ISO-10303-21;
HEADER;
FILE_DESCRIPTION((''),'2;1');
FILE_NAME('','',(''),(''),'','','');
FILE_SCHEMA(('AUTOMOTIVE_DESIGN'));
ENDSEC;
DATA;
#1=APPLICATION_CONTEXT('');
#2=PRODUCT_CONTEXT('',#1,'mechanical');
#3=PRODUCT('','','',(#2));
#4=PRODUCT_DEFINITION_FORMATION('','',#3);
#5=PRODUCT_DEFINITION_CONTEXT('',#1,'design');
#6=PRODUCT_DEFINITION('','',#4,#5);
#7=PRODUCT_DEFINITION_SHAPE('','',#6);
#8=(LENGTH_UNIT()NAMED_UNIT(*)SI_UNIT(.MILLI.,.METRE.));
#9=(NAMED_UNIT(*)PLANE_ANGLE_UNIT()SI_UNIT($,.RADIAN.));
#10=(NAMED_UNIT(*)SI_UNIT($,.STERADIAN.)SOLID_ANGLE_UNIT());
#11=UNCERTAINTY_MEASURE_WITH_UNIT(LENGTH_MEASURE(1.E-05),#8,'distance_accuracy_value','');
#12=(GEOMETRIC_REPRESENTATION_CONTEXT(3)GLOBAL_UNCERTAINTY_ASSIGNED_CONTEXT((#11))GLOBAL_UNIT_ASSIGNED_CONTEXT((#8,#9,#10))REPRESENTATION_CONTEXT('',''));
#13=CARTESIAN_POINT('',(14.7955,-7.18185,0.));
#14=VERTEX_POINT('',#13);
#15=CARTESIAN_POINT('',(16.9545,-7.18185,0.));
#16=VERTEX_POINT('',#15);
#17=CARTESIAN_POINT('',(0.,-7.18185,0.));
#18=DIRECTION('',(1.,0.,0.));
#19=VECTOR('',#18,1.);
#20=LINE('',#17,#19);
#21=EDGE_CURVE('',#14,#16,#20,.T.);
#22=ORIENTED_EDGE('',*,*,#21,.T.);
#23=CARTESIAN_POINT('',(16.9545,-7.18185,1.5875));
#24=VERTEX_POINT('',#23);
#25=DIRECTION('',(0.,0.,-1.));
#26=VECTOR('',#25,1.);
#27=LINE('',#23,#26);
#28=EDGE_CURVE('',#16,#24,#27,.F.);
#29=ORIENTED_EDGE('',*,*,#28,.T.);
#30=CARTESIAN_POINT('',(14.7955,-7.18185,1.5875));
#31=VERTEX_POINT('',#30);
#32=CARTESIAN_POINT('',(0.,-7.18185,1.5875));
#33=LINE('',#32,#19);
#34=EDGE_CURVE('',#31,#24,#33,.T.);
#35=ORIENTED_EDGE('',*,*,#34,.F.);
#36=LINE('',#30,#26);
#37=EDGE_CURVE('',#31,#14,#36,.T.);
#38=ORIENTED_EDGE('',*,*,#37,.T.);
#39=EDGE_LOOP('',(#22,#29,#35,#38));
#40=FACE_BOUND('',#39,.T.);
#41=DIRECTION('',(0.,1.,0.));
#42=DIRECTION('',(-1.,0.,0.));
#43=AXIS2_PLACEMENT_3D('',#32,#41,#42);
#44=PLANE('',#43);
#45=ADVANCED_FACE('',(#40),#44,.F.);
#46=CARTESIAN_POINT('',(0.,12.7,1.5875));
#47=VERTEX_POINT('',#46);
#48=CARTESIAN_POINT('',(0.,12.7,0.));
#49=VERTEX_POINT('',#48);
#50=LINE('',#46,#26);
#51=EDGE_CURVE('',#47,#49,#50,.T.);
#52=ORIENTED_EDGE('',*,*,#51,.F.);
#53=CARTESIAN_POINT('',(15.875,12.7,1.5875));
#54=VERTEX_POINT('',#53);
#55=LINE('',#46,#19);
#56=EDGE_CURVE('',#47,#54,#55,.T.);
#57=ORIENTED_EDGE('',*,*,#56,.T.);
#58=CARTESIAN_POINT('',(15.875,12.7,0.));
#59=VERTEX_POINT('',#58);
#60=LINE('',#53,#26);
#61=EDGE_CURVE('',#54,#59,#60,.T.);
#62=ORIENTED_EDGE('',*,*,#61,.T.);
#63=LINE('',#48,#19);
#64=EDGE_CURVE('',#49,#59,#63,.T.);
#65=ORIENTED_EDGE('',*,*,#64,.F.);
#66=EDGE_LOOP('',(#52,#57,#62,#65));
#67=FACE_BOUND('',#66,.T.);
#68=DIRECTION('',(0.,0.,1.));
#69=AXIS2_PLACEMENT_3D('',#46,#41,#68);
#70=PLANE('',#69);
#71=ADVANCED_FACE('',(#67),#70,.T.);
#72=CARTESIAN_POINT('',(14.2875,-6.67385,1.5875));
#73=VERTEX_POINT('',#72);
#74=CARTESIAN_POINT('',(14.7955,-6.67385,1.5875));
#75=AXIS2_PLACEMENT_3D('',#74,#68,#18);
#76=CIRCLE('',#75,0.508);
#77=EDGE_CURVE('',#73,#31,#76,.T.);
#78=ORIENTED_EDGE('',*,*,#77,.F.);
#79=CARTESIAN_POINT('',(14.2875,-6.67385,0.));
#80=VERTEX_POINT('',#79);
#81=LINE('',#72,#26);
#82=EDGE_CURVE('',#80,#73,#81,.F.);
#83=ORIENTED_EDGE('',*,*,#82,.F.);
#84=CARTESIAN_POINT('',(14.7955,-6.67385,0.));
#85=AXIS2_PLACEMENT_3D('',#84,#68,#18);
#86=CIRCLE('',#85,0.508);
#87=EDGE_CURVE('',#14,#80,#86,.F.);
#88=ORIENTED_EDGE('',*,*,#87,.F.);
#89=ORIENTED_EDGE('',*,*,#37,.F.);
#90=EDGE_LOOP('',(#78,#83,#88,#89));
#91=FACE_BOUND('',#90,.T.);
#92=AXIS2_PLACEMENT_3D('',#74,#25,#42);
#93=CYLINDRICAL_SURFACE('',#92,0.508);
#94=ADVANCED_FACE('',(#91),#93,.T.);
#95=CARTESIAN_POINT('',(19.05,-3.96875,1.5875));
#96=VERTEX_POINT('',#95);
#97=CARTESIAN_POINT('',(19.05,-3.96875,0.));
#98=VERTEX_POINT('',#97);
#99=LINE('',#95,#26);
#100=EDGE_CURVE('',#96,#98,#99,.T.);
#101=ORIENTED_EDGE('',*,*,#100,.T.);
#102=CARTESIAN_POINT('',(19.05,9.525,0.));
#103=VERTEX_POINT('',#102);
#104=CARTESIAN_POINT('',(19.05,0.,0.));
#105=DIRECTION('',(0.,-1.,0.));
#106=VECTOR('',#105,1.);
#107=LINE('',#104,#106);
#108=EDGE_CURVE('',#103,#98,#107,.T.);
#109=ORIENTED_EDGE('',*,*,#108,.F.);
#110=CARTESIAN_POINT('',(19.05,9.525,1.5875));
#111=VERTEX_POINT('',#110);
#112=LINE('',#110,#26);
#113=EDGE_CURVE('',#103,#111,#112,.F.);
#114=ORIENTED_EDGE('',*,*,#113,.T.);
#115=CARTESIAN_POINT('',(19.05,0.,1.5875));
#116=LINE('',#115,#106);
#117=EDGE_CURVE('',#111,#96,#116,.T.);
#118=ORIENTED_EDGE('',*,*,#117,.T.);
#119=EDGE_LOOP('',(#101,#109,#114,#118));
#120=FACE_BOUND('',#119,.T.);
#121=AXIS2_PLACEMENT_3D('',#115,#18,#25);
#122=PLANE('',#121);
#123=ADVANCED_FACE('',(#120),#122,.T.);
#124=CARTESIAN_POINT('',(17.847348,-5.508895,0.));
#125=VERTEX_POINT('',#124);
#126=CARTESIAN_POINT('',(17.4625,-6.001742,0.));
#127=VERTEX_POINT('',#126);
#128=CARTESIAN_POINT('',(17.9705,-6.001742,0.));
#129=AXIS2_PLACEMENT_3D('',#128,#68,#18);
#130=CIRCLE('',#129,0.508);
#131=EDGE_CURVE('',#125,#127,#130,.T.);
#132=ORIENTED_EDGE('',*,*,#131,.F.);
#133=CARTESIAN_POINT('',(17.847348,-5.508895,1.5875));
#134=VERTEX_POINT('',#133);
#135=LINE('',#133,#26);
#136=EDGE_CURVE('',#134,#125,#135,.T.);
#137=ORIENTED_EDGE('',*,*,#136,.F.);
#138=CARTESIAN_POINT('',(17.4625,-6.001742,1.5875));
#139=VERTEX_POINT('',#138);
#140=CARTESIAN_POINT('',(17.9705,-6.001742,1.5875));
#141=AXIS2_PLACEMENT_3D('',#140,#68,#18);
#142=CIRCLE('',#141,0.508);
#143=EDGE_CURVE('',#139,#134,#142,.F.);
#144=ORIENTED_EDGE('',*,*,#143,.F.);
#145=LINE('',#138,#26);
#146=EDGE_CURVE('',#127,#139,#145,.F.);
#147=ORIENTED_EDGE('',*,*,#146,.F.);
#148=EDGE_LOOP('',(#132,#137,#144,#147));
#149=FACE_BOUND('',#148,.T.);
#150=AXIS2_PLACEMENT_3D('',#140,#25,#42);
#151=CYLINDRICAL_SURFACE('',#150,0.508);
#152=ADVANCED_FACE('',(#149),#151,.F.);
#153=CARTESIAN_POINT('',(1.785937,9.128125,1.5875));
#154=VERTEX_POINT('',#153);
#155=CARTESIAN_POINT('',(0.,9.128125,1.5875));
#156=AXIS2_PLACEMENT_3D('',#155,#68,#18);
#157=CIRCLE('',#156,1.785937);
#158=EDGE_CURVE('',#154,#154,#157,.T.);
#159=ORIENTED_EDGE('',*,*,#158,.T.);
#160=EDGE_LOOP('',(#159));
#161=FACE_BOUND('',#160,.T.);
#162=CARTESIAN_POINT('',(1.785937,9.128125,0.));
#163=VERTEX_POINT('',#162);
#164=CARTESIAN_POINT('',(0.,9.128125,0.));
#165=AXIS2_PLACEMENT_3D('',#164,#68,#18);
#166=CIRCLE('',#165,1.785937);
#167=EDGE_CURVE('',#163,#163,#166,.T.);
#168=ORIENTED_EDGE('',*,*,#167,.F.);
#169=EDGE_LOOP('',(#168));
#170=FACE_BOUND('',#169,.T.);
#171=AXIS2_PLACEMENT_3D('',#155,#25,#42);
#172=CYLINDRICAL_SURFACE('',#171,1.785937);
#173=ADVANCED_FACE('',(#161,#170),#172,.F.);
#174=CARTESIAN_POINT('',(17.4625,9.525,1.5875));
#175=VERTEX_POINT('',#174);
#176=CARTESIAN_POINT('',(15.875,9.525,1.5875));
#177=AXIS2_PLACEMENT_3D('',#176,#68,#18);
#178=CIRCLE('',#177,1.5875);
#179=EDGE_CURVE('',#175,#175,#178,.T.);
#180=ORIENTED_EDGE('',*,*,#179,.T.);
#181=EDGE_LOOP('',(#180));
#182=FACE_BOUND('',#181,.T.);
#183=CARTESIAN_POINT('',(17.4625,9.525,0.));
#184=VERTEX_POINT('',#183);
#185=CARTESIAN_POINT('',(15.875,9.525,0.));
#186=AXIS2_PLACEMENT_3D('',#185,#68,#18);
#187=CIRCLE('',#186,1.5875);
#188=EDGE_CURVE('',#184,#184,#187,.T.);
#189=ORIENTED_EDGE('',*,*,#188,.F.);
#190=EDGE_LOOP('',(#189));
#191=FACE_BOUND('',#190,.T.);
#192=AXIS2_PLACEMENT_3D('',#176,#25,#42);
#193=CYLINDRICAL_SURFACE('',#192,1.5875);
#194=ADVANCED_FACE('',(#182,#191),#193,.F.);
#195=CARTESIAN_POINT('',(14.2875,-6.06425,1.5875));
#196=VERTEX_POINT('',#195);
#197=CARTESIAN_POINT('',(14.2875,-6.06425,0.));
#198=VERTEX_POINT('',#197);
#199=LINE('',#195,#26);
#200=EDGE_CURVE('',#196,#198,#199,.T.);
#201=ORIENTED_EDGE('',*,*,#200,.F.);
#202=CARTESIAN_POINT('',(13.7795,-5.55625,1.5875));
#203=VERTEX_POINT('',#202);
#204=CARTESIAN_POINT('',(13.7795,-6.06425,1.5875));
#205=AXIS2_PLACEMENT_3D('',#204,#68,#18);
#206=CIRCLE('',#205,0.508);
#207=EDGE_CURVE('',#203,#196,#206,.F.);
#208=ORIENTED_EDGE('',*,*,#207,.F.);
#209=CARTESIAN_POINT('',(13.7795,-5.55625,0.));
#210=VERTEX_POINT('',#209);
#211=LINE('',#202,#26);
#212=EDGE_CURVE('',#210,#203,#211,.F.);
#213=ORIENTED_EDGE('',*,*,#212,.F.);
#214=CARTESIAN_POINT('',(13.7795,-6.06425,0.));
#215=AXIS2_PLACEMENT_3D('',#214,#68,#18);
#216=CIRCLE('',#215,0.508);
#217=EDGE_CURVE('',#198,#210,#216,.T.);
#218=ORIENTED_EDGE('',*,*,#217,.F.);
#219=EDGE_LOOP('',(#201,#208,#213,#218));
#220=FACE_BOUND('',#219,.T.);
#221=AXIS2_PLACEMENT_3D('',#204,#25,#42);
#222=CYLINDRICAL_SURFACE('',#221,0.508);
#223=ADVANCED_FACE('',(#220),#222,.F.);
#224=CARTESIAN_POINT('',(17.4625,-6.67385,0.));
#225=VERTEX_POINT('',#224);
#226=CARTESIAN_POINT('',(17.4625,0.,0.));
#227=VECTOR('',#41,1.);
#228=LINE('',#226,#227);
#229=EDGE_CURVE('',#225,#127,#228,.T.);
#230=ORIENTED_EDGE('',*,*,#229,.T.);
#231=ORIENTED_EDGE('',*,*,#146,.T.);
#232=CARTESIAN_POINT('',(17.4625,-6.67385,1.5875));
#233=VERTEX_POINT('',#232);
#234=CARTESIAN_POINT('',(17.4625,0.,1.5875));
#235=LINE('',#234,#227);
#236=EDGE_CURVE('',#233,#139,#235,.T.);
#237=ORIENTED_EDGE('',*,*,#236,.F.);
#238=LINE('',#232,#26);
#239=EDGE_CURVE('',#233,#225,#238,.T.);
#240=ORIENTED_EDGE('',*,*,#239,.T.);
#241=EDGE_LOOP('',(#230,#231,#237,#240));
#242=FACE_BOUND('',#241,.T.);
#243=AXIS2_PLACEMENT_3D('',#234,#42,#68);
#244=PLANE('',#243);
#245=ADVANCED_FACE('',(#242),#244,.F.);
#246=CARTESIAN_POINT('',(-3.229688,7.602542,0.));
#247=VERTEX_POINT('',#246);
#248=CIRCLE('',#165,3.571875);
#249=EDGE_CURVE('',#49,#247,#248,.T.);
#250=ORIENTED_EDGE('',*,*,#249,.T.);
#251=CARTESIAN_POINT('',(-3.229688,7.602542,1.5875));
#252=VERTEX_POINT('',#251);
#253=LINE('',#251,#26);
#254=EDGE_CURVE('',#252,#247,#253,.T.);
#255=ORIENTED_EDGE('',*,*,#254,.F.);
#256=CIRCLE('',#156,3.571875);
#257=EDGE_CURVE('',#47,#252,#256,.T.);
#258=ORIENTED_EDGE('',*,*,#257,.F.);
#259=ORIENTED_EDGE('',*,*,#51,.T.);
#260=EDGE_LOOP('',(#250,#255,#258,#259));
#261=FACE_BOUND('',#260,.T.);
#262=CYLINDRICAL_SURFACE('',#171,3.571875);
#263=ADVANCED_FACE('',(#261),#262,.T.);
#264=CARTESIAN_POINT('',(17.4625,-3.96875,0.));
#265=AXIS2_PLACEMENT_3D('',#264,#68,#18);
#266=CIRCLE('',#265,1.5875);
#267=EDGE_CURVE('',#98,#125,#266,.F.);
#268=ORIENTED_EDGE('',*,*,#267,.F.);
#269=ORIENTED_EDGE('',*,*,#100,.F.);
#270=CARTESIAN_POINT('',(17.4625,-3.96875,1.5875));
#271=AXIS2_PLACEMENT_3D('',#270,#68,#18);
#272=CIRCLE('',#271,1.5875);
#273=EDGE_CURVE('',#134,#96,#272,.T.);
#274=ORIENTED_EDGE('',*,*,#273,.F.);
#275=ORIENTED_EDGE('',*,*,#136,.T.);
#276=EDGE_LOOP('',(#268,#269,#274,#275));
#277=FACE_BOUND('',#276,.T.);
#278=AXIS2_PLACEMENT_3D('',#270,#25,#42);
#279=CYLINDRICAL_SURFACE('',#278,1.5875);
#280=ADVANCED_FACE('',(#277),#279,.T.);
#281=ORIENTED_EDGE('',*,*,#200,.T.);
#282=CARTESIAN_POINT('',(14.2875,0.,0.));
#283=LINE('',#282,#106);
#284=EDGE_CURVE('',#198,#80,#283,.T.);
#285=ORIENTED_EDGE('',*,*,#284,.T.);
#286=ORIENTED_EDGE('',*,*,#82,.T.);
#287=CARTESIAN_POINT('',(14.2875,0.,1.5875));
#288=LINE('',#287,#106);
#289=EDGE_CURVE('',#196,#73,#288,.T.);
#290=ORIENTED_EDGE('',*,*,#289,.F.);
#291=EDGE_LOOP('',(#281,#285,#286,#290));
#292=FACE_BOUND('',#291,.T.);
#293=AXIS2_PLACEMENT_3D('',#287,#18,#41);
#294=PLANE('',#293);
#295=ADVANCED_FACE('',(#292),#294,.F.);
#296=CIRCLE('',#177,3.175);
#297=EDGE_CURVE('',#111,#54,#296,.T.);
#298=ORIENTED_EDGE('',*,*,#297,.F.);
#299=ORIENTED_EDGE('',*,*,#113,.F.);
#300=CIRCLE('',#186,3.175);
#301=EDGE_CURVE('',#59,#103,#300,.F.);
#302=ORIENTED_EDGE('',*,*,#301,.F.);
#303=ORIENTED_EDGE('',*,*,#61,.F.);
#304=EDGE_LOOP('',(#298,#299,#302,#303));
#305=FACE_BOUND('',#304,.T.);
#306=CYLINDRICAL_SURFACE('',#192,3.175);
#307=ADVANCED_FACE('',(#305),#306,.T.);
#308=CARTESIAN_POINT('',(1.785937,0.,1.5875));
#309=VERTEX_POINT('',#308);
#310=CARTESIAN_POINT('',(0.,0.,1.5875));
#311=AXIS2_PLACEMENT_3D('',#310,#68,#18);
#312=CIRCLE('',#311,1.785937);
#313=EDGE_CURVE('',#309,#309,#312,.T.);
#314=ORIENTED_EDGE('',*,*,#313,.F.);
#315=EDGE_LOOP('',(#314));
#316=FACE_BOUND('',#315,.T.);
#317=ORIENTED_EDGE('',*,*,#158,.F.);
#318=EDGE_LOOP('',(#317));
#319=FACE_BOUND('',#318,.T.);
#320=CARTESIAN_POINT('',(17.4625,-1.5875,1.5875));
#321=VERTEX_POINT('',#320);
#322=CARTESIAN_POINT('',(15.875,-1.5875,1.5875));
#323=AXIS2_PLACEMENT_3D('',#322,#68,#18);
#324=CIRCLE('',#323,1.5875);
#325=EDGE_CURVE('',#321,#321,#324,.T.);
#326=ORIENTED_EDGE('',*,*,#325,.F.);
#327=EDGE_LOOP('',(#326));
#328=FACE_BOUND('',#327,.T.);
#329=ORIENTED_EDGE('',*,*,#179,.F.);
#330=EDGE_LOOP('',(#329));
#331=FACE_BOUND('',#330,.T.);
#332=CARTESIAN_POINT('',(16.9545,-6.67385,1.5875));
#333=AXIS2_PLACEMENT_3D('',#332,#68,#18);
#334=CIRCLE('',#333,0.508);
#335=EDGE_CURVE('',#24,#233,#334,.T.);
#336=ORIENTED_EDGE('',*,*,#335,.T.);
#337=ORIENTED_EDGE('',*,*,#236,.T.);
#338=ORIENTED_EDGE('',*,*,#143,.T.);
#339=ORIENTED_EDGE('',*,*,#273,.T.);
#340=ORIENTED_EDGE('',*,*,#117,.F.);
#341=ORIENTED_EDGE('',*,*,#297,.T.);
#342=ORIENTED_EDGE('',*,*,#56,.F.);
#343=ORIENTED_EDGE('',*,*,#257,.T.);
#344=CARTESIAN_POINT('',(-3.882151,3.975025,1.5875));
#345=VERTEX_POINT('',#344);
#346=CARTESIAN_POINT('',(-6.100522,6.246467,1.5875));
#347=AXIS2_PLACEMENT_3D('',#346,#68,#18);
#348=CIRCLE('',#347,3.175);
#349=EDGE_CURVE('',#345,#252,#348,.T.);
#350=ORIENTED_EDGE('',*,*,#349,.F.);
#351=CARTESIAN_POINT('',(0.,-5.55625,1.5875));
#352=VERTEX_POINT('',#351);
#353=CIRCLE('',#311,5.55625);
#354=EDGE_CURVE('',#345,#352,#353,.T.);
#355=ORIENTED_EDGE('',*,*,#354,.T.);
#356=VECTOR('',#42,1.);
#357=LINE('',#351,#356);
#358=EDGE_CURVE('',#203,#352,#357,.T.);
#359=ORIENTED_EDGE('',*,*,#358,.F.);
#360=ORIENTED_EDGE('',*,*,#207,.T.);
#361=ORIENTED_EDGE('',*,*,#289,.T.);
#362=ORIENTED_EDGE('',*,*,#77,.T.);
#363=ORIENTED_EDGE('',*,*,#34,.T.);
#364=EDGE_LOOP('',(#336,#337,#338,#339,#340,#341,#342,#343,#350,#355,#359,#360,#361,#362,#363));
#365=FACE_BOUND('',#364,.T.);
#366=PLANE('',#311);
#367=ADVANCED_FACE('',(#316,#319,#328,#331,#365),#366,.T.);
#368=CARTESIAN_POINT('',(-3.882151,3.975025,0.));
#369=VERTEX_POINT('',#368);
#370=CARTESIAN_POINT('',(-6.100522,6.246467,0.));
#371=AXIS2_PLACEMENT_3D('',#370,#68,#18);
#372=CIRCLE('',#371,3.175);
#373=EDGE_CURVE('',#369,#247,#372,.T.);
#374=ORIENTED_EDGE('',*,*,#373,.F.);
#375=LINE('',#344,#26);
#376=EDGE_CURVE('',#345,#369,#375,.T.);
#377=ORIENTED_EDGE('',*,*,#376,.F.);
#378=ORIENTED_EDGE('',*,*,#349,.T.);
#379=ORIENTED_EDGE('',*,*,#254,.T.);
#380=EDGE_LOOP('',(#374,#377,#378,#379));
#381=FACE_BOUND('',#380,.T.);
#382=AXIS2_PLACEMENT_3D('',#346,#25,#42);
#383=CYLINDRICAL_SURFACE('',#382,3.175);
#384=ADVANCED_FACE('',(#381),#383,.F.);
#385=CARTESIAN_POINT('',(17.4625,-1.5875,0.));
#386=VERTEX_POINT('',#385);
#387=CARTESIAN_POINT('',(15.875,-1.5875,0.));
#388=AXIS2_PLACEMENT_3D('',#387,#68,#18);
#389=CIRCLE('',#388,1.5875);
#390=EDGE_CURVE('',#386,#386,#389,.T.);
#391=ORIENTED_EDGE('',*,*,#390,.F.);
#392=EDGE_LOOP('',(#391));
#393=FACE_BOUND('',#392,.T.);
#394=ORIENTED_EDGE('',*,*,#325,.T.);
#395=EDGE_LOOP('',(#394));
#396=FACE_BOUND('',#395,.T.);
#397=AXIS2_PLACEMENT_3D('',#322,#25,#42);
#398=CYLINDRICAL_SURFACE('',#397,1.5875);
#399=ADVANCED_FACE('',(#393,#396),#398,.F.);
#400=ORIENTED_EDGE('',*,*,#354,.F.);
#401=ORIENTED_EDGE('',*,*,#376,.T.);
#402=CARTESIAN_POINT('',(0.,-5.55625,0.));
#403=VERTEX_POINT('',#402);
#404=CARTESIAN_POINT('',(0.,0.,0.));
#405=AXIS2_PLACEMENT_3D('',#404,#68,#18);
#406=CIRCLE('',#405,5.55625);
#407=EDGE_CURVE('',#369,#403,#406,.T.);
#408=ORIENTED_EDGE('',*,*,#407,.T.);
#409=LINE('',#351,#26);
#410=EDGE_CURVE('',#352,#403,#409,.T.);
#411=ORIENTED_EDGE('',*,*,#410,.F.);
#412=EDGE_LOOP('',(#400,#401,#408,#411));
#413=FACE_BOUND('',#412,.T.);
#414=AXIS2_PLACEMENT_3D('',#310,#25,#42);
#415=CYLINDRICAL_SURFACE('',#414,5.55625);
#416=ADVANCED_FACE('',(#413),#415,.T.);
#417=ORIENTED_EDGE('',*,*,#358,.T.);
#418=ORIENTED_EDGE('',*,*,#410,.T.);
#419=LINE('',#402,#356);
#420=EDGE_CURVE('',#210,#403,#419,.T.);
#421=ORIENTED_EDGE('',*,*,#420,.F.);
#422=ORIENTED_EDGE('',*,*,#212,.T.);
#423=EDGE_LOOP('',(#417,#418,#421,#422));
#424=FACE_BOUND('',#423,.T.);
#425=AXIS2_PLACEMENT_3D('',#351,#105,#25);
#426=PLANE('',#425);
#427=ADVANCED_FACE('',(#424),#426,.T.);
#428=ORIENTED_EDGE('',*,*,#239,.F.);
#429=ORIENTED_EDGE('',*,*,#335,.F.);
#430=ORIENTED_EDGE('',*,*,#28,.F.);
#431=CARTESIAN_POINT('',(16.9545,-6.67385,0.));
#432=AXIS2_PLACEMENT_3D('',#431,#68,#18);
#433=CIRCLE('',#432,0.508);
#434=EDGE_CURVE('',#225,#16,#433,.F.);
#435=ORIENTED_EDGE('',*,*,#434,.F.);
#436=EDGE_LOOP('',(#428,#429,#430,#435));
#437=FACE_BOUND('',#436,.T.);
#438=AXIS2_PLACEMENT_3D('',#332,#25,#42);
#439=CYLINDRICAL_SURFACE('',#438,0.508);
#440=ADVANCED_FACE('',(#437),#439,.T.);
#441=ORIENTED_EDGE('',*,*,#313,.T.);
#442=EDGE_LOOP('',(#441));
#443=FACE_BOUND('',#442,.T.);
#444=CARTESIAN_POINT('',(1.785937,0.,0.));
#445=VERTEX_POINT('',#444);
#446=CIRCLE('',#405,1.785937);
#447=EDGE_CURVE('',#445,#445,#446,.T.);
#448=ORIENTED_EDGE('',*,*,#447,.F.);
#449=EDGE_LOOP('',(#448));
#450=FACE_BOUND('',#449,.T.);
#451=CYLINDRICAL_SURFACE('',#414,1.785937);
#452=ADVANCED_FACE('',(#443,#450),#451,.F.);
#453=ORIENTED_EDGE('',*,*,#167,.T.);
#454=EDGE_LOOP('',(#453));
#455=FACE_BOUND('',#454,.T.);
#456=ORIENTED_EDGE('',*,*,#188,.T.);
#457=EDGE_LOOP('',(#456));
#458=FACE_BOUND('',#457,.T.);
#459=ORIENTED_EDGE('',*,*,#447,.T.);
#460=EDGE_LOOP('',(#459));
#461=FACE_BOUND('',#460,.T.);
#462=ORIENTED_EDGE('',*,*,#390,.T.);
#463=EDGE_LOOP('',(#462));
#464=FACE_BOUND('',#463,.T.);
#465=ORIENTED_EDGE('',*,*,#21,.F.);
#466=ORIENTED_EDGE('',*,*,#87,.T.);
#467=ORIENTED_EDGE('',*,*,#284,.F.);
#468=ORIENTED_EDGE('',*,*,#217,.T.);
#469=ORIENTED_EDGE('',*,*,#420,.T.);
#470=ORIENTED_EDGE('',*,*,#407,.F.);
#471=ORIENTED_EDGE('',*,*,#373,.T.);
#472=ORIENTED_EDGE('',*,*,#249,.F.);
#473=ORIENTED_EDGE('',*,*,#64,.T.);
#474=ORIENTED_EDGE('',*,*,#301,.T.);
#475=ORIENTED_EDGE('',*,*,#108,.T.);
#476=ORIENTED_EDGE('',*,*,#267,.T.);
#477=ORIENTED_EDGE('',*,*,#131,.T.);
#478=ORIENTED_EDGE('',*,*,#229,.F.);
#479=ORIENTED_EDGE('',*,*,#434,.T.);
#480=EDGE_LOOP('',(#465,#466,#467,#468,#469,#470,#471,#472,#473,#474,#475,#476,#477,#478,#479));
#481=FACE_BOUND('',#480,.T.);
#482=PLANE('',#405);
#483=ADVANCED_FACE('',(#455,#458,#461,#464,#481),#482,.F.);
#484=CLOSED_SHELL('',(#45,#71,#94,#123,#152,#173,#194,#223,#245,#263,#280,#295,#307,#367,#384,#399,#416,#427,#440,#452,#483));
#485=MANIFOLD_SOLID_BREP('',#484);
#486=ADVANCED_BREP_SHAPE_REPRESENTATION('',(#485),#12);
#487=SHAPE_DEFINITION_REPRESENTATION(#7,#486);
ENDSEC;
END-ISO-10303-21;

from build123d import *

# Parameters (mm, degrees)
SKETCH2_R           = 1.5875
SKETCH2_R_2         = 1.7859375
BOSS_EXTRUDE1_DEPTH = 1.5875
FILLET1_R           = 3.175
FILLET3_R           = 1.5875
FILLET2_R           = 0.508


with BuildPart() as part:
    # Sketch2 → Boss-Extrude1 (new body)
    with BuildSketch(Plane.XY):
        with BuildLine():
            ThreePointArc((-3.882150485, 3.975024739), (-5.145782024, -2.095910644), (0, -5.55625))
            Line((0, -5.55625), (14.2875, -5.55625))
            Line((14.2875, -5.55625), (14.2875, -7.18185))
            Line((14.2875, -7.18185), (17.4625, -7.18185))
            Line((17.4625, -7.18185), (17.4625, -5.55625))
            Line((17.4625, -5.55625), (19.05, -5.55625))
            Line((19.05, -5.55625), (19.05, 12.7))
            Line((19.05, 12.7), (0, 12.7))
            ThreePointArc((0, 12.7), (-3.017240848, 11.039812391), (-3.229688208, 7.602541474))
            ThreePointArc((-3.229688208, 7.602541474), (-2.975666516, 5.684416094), (-3.882150485, 3.975024739))
        make_face()
        with Locations((15.875, 9.525)):
            Circle(SKETCH2_R, mode=Mode.SUBTRACT)
        with Locations((15.875, -1.5875)):
            Circle(SKETCH2_R, mode=Mode.SUBTRACT)
        Circle(SKETCH2_R_2, mode=Mode.SUBTRACT)
        with Locations((0, 9.128125)):
            Circle(SKETCH2_R_2, mode=Mode.SUBTRACT)
    extrude(amount=BOSS_EXTRUDE1_DEPTH)

    # Fillet1
    fillet1_edges = [part.edges().sort_by_distance(p)[0] for p in [
        (19.05, 12.7, 0.79375),
    ]]
    fillet(fillet1_edges, radius=FILLET1_R)

    # Fillet3
    fillet3_edges = [part.edges().sort_by_distance(p)[0] for p in [
        (19.05, -5.55625, 0.79375),
    ]]
    fillet(fillet3_edges, radius=FILLET3_R - 0.0001)  # a hair under: the kernel refuses the full size

    # Fillet2
    fillet2_edges = [part.edges().sort_by_distance(p)[0] for p in [
        (17.4625, -5.55625, 0.79375),
        (17.4625, -7.18185, 0.79375),
        (14.2875, -7.18185, 0.79375),
        (14.2875, -5.55625, 0.79375),
    ]]
    fillet(fillet2_edges, radius=FILLET2_R)


solid = part.part
